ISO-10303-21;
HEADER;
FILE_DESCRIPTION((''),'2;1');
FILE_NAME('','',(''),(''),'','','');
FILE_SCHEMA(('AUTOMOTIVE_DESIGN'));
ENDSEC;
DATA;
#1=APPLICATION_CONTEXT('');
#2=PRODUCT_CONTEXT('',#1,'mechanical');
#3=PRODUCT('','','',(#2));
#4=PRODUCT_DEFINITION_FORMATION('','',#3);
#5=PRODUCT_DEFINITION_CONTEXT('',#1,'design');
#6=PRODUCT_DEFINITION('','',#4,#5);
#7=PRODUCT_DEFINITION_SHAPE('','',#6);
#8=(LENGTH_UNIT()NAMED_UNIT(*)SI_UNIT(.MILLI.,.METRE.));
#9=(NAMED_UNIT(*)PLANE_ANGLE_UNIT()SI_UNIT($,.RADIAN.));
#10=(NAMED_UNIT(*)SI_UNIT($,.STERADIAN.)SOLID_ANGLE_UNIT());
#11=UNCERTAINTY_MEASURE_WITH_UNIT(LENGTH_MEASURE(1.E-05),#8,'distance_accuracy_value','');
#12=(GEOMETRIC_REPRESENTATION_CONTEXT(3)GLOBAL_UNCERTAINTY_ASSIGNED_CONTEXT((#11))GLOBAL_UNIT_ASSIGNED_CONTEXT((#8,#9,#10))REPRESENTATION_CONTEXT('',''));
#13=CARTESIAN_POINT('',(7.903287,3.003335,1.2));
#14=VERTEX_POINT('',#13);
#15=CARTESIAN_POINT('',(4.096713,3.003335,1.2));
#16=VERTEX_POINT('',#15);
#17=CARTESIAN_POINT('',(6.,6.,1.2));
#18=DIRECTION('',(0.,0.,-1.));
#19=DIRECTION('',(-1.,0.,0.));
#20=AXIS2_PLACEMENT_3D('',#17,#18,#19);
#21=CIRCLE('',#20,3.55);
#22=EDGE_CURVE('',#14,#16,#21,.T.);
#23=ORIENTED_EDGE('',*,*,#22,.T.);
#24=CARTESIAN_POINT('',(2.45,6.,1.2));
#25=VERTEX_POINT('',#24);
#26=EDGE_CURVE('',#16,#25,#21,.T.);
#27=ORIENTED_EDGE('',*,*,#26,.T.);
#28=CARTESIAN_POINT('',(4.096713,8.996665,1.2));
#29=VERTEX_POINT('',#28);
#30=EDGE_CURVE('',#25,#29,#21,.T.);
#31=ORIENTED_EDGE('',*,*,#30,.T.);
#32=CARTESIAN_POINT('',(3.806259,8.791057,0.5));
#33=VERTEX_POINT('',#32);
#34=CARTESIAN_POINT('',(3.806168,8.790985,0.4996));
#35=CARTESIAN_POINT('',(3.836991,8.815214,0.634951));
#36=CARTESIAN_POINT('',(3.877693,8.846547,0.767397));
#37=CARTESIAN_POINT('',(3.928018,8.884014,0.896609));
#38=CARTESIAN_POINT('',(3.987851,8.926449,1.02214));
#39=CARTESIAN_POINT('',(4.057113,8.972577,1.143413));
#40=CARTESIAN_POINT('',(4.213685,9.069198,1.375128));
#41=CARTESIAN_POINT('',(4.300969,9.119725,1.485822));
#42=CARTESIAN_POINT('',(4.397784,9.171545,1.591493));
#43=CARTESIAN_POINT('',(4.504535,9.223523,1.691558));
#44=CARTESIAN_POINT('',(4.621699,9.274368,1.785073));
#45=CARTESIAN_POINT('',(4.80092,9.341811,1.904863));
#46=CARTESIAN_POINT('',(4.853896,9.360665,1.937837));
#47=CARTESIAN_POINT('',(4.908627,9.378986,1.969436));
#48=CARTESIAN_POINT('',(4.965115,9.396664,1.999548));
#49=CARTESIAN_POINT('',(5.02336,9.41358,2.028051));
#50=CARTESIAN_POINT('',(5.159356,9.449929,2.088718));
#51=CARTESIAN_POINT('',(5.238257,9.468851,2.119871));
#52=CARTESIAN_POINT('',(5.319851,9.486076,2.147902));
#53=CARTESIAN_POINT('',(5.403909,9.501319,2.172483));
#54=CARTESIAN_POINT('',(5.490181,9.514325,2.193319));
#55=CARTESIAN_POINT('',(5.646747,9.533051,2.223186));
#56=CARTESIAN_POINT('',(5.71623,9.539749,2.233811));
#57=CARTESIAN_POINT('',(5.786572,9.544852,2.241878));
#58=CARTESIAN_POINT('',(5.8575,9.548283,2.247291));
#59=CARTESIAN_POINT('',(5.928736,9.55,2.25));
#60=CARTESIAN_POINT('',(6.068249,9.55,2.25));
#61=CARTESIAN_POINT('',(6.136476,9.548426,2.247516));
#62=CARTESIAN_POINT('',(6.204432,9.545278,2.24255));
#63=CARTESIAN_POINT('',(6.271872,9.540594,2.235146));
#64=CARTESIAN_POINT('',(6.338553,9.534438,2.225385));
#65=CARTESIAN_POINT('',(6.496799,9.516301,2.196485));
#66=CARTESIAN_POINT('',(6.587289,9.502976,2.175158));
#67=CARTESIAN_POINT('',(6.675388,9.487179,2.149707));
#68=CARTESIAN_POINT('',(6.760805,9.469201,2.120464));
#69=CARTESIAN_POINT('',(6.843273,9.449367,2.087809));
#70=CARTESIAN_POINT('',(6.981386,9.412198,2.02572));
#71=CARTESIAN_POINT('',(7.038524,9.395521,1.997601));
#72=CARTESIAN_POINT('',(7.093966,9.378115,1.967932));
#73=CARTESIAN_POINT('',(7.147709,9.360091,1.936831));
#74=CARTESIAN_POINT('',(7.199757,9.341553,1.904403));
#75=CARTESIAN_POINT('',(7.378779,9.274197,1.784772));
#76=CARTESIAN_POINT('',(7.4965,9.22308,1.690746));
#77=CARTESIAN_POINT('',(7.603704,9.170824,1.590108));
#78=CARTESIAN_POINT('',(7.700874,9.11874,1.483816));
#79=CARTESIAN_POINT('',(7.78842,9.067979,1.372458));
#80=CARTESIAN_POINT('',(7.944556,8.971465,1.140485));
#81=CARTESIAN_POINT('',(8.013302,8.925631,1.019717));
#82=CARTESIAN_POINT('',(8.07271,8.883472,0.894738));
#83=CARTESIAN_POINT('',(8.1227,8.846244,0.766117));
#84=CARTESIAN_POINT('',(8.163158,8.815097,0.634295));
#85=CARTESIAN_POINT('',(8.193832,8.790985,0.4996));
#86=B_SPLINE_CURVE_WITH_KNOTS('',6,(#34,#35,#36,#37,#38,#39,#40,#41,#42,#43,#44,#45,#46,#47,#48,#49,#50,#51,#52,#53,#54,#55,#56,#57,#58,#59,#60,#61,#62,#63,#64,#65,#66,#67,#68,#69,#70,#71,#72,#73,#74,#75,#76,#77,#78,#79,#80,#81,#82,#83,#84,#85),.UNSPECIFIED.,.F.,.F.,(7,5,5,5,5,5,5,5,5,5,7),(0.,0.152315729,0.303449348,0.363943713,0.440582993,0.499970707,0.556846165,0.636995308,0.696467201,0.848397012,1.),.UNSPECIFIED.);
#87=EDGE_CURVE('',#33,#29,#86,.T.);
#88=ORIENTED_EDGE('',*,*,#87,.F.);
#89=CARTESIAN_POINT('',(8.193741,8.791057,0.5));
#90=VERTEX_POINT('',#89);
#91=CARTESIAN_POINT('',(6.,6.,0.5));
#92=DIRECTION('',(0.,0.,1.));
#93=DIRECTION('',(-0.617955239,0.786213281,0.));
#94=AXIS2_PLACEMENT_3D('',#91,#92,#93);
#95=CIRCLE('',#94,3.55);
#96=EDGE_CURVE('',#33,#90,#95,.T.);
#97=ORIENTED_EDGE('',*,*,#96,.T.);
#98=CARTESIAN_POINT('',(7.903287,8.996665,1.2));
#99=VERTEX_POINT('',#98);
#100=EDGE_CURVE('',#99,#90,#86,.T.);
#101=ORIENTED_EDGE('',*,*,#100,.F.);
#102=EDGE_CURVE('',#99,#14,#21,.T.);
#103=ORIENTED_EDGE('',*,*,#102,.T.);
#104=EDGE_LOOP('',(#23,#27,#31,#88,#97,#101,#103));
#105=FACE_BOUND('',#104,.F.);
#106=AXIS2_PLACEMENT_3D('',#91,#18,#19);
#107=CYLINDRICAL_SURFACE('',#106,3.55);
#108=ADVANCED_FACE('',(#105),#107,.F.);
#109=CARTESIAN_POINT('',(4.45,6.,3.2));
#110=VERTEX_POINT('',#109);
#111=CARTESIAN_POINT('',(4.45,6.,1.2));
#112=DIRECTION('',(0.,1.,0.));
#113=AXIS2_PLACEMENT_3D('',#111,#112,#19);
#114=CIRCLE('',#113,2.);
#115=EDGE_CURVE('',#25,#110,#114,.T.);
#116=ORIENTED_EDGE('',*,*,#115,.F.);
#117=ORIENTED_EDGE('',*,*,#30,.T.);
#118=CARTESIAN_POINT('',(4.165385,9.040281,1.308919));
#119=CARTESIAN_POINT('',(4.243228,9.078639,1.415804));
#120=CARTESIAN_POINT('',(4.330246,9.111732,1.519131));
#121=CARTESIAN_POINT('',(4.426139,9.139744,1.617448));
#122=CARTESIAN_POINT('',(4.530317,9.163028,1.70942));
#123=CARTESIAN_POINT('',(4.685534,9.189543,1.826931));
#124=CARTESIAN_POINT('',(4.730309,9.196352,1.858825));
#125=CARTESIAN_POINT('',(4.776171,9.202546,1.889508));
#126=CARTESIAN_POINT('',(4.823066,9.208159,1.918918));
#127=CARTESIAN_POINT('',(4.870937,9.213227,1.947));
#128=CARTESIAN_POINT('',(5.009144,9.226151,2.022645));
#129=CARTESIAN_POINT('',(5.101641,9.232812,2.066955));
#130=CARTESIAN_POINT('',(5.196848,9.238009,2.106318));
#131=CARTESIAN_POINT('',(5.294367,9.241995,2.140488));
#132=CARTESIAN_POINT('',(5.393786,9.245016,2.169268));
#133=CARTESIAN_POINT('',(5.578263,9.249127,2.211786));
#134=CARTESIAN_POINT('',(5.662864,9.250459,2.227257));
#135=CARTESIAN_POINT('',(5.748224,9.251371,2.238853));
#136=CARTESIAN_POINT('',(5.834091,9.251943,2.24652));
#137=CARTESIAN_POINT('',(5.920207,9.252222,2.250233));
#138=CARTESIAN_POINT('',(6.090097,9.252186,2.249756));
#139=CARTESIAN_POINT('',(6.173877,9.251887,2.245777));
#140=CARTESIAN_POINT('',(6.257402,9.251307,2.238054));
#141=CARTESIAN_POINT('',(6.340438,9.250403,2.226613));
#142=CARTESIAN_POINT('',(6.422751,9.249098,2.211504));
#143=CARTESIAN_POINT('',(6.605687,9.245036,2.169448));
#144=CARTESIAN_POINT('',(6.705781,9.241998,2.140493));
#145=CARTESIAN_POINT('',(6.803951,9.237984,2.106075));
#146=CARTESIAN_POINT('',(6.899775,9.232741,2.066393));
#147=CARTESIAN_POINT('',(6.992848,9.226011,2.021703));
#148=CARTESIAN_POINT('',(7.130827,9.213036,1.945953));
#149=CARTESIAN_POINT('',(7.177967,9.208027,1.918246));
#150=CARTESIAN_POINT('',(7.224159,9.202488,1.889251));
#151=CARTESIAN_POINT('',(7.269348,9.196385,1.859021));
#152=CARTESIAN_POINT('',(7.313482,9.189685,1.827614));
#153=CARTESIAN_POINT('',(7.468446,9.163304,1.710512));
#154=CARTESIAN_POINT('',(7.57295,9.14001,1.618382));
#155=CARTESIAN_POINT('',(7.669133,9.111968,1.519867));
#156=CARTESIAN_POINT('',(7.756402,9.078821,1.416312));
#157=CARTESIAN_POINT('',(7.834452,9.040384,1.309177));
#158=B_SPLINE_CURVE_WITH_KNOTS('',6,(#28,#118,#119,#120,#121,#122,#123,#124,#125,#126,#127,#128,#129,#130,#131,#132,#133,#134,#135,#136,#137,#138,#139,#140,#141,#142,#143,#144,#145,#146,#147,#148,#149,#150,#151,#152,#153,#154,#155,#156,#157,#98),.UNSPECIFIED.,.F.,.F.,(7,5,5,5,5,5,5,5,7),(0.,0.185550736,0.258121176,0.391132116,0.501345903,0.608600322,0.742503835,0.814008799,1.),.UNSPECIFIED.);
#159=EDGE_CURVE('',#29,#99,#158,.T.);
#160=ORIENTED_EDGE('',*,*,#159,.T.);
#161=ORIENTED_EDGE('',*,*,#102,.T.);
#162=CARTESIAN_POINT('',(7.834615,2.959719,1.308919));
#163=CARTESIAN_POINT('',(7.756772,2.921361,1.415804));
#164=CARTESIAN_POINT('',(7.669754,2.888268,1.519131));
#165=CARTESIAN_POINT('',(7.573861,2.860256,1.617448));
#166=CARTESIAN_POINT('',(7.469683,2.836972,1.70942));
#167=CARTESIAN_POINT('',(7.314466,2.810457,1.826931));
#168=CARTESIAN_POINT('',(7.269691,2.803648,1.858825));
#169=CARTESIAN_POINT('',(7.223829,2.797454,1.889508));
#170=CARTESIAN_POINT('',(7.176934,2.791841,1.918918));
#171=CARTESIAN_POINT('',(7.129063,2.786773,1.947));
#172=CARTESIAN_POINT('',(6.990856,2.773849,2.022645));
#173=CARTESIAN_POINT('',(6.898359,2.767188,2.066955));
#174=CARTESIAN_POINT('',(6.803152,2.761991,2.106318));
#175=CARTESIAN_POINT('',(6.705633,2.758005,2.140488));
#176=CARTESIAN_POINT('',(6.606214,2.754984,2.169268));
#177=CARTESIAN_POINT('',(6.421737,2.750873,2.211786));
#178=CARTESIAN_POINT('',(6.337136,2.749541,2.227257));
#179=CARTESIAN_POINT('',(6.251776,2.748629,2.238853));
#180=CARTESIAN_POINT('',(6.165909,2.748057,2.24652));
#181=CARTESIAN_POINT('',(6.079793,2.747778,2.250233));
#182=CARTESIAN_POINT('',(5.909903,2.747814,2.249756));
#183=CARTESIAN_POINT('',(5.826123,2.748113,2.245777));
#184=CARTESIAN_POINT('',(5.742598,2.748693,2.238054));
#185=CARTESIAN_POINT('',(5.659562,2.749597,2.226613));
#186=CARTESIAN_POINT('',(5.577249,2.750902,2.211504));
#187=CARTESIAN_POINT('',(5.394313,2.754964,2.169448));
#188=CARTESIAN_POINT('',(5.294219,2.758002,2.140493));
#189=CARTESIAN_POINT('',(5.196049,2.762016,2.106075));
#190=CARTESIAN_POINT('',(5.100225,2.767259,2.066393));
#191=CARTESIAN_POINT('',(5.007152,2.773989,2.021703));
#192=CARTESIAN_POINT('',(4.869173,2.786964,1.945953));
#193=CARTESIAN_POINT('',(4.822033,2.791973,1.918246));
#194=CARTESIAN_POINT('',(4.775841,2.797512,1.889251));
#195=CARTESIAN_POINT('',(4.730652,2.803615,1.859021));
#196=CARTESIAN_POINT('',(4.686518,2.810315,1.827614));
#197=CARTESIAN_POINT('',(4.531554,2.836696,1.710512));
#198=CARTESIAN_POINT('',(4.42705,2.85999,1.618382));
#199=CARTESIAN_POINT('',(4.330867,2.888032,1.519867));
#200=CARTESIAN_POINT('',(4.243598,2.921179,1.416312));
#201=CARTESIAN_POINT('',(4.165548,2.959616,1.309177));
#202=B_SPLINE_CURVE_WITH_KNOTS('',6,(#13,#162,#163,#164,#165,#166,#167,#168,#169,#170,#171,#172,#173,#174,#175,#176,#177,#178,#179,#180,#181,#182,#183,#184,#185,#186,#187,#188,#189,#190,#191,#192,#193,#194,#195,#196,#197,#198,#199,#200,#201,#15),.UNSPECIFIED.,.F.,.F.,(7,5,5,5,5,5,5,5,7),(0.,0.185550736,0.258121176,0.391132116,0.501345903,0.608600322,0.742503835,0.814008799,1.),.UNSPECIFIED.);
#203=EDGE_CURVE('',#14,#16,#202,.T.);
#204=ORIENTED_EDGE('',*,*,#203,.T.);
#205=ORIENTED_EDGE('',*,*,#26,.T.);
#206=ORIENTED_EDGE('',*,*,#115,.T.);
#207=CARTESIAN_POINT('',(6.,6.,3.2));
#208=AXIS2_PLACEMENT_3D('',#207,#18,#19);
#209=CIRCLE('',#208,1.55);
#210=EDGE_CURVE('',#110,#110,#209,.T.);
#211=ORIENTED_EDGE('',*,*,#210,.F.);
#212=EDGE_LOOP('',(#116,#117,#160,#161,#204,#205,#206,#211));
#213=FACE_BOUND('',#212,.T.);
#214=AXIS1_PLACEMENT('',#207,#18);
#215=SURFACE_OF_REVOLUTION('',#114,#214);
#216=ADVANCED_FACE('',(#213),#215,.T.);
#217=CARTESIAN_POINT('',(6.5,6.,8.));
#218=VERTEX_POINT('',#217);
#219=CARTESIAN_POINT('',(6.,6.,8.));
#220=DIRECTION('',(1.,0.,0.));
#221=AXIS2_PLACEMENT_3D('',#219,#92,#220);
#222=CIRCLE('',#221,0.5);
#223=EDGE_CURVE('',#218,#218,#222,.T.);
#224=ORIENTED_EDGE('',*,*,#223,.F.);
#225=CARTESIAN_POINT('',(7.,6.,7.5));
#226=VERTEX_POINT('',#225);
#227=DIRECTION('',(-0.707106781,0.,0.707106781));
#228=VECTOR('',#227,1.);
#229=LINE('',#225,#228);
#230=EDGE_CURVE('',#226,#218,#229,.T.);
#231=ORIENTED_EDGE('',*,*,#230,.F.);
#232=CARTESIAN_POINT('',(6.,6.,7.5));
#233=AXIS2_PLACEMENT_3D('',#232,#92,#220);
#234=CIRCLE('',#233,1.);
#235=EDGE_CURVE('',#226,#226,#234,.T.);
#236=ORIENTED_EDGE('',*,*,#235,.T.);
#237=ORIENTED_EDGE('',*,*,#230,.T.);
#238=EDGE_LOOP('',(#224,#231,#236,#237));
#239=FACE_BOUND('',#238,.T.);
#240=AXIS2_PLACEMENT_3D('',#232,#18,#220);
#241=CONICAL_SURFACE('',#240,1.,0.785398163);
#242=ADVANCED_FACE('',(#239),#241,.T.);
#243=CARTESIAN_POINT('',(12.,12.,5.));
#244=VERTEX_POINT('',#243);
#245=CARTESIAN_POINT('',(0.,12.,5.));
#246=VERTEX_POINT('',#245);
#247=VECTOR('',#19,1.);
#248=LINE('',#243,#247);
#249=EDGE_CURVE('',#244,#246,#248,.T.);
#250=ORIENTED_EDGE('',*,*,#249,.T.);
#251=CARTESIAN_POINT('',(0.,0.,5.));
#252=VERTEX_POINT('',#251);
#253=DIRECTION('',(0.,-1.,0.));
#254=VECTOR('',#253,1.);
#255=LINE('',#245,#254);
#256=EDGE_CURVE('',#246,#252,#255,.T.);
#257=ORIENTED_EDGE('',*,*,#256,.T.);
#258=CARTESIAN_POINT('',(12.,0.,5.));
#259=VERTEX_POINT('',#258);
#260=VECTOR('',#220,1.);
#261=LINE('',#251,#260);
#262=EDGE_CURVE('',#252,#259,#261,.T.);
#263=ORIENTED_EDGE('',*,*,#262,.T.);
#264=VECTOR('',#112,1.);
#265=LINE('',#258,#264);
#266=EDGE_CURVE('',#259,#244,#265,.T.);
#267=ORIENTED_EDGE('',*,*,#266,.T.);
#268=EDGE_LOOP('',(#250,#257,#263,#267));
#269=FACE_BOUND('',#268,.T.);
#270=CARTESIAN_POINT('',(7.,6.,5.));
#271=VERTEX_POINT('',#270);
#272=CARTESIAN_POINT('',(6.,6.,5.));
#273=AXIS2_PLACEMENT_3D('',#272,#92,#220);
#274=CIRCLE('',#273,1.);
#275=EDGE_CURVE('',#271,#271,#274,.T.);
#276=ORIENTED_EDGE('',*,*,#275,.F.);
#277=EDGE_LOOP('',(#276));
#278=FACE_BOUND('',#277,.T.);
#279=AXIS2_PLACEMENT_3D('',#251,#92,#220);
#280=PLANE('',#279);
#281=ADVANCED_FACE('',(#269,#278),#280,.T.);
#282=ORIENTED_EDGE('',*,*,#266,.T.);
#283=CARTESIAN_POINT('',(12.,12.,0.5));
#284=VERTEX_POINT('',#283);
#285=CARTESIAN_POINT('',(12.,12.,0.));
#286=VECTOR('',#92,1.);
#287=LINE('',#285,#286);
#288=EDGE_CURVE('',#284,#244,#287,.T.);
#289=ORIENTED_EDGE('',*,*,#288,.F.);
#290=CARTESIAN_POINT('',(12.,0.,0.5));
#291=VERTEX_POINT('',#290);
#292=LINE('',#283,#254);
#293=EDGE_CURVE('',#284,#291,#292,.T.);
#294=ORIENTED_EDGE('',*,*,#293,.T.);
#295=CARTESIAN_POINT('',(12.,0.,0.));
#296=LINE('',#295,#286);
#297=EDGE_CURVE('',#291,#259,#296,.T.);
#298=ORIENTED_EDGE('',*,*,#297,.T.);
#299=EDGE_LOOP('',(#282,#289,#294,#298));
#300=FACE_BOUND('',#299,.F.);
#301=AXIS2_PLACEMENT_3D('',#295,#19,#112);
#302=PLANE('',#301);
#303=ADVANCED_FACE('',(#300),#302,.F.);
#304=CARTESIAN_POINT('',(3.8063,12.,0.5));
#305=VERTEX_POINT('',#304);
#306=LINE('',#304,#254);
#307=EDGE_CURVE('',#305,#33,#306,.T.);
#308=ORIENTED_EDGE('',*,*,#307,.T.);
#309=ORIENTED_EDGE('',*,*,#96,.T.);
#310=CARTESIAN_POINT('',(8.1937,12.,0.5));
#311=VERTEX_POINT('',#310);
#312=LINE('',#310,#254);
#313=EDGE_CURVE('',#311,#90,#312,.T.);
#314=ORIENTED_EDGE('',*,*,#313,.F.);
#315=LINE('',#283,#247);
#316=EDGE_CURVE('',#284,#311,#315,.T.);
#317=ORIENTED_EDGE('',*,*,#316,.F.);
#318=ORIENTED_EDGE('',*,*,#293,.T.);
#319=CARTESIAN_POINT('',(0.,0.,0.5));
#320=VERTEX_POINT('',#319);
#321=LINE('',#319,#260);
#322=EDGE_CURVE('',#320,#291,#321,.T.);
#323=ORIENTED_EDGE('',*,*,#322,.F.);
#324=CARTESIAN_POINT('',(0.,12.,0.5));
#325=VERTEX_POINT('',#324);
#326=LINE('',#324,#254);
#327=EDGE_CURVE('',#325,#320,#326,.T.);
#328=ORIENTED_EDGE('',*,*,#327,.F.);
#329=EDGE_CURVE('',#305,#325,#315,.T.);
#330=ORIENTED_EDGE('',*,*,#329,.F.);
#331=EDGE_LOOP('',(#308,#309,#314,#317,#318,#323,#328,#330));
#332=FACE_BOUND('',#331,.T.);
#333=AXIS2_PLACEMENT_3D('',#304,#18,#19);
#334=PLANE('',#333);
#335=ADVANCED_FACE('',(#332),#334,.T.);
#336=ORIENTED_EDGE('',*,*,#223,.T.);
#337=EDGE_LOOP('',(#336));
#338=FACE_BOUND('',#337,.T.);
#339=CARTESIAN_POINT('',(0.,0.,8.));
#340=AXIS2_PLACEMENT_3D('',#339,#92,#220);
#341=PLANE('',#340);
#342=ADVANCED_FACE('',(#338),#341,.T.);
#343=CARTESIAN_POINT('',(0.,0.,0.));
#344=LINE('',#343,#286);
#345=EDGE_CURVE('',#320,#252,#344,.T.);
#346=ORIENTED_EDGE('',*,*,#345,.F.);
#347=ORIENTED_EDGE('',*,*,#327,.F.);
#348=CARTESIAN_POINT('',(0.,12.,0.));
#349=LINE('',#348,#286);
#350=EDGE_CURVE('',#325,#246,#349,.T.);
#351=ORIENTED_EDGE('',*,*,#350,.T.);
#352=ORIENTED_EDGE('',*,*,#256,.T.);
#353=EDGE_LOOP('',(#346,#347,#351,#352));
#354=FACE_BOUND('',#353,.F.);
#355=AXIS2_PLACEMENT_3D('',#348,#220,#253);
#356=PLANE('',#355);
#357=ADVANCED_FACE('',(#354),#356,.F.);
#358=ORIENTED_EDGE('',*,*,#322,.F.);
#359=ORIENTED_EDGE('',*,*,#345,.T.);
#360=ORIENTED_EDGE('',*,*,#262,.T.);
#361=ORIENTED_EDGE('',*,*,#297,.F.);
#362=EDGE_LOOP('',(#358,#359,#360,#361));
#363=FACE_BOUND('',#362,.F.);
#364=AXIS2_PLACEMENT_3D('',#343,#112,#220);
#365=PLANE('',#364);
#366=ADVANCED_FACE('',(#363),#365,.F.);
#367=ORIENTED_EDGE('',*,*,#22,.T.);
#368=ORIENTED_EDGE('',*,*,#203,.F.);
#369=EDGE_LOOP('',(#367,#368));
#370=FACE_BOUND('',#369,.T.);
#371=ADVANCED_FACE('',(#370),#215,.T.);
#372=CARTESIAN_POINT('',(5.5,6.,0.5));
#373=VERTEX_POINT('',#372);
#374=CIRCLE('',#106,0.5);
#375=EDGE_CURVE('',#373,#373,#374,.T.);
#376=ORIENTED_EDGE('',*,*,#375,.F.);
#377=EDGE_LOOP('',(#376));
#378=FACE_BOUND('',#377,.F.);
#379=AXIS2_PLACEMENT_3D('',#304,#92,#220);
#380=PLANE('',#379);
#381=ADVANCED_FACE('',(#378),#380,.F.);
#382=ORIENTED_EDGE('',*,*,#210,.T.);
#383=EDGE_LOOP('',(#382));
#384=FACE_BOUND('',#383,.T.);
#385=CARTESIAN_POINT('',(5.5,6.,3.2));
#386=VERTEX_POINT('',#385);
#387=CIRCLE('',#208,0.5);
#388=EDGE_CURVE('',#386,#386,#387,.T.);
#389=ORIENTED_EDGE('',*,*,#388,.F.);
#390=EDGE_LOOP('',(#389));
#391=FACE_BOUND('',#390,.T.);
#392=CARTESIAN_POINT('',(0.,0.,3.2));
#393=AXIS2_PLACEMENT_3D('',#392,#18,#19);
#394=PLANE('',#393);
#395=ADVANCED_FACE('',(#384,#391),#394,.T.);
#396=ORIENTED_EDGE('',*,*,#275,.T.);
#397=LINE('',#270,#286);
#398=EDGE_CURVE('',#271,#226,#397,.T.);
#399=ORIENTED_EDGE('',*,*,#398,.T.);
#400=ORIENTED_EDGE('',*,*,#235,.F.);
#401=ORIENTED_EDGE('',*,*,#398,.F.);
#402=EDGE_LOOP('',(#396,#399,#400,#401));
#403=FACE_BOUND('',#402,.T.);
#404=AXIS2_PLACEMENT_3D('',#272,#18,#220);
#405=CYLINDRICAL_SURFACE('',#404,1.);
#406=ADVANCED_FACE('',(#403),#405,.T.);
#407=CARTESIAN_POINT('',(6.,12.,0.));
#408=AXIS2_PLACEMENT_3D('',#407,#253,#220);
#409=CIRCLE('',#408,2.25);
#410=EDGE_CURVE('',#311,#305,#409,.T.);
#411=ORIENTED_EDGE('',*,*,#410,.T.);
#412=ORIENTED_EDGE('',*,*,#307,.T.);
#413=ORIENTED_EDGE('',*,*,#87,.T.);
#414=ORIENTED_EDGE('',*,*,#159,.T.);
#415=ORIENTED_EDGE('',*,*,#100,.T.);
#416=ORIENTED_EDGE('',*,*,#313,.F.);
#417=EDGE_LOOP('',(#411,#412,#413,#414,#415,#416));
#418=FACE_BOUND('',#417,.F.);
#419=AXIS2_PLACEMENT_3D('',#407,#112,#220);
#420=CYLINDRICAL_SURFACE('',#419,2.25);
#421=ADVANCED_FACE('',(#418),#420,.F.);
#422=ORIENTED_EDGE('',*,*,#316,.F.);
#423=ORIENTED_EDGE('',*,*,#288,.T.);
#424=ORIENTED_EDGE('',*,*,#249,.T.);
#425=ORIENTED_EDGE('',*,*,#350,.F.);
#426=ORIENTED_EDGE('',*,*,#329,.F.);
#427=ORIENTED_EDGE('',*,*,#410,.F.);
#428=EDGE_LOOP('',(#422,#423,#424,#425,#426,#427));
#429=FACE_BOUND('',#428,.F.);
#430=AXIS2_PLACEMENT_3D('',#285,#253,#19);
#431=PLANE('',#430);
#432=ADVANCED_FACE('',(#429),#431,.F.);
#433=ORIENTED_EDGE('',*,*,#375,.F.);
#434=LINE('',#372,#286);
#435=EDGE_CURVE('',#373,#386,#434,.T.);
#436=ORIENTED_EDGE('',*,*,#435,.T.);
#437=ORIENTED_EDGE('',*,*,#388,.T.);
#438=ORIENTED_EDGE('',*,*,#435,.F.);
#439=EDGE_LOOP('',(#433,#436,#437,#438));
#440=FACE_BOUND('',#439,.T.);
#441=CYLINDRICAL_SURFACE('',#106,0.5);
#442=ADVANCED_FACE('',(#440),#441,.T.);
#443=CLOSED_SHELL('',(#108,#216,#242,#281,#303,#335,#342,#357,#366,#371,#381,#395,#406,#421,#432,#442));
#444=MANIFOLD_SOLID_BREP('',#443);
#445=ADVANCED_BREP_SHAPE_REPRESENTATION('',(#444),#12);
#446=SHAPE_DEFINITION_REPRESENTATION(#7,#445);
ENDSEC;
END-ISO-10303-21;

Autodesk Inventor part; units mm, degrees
ref_plane "YZ Plane" through (0, 0, 0) normal (1, 0, 0) x (0, 1, 0)
ref_plane "XZ Plane" through (0, 0, 0) normal (0, 1, 0) x (-1, 0, 0)
ref_plane "XY Plane" through (0, 0, 0) normal (0, 0, 1) x (1, 0, 0)
sketch "Skizze1" plane through (0, 0, 0) normal (0, 0, 1) x (1, 0, 0)
  line L0 (0, 0) -> (12, 0)
  line L1 (12, 0) -> (12, 12)
  line L2 (12, 12) -> (0, 12)
  line L3 (0, 12) -> (0, 0)
  dimension "d0" = 12
  dimension "d1" = 12
extrude "Extrusion1" add sketch "Skizze1" along normal blind 5
sketch "Skizze2" plane through (0, 0, 5) normal (0, 0, 1) x (1, 0, 0)
  circle A0 centre (6, 6) radius 1
  line L0 (12, 0) -> (12, 12) projected
  line L1 (0, 0) -> (12, 0) projected
  dimension "d4" = 6
  dimension "d5" = 6
  dimension "d6" = 2
extrude "Extrusion2" add sketch "Skizze2" along normal blind 3
chamfer "Fase1" distance 0.5 angle 45 1 edges at (5, 6, 8)
sketch "Skizze3" plane through (0, 12, 0) normal (0, 1, 0) x (1, 0, 0)
  line L0 (0, 0) -> (12, 0) projected
  circle A0 centre (6, 0) radius 2.25
  dimension "d12" = 4.5
extrude "Extrusion3" cut sketch "Skizze3" against normal blind 4
sketch "Skizze4" plane through (0, 0, 0) normal (0, 0, -1) x (-1, 0, 0)
  circle A0 centre (-6, 6) radius 0.5 projected
  circle A1 centre (-6, 6) radius 5.4
  point P0 (0, 0)
ref_plane "Arbeitsebene1" through (0, 0, 0.5) normal (0, 0, -1) x (-1, 0, 0)
sketch "Skizze5" plane through (0, 0, 0.5) normal (0, 0, -1) x (-1, 0, 0)
  circle A0 centre (-6, 6) radius 0.5 projected
  circle A1 centre (-6, 6) radius 3.55
  point P0 (0, 0)
  dimension "d18" = 7.1
extrude "Extrusion5" cut sketch "Skizze5" against normal blind 2.7
sketch "Skizze6" plane through (0, 12, 5) normal (0, 1, 0) x (1, 0, 0)
  line L0 (12, 4.5) -> (0, 4.5)
  line L1 (0, 4.5) -> (0, 5)
  line L2 (0, 5) -> (12, 5)
  line L3 (12, 5) -> (12, 4.5)
  line L4 (0, 5) -> (0, 0) projected
  line L5 (3.75, 5) -> (0, 5) projected
  line L6 (12, 5) -> (12, 0) projected
  line L7 (3.8063, 4.5) -> (8.1937, 4.5) projected
  dimension "d24" = 0
  dimension "d25" = 0
  dimension "d26" = 0
  dimension "d27" = 0
extrude "Extrusion6" cut sketch "Skizze6" against normal blind 20
fillet "Rundung1" radius 2 1 edges at (9.55, 6, 3.2)
properties part number "Elektrodenhaltr3.0"
